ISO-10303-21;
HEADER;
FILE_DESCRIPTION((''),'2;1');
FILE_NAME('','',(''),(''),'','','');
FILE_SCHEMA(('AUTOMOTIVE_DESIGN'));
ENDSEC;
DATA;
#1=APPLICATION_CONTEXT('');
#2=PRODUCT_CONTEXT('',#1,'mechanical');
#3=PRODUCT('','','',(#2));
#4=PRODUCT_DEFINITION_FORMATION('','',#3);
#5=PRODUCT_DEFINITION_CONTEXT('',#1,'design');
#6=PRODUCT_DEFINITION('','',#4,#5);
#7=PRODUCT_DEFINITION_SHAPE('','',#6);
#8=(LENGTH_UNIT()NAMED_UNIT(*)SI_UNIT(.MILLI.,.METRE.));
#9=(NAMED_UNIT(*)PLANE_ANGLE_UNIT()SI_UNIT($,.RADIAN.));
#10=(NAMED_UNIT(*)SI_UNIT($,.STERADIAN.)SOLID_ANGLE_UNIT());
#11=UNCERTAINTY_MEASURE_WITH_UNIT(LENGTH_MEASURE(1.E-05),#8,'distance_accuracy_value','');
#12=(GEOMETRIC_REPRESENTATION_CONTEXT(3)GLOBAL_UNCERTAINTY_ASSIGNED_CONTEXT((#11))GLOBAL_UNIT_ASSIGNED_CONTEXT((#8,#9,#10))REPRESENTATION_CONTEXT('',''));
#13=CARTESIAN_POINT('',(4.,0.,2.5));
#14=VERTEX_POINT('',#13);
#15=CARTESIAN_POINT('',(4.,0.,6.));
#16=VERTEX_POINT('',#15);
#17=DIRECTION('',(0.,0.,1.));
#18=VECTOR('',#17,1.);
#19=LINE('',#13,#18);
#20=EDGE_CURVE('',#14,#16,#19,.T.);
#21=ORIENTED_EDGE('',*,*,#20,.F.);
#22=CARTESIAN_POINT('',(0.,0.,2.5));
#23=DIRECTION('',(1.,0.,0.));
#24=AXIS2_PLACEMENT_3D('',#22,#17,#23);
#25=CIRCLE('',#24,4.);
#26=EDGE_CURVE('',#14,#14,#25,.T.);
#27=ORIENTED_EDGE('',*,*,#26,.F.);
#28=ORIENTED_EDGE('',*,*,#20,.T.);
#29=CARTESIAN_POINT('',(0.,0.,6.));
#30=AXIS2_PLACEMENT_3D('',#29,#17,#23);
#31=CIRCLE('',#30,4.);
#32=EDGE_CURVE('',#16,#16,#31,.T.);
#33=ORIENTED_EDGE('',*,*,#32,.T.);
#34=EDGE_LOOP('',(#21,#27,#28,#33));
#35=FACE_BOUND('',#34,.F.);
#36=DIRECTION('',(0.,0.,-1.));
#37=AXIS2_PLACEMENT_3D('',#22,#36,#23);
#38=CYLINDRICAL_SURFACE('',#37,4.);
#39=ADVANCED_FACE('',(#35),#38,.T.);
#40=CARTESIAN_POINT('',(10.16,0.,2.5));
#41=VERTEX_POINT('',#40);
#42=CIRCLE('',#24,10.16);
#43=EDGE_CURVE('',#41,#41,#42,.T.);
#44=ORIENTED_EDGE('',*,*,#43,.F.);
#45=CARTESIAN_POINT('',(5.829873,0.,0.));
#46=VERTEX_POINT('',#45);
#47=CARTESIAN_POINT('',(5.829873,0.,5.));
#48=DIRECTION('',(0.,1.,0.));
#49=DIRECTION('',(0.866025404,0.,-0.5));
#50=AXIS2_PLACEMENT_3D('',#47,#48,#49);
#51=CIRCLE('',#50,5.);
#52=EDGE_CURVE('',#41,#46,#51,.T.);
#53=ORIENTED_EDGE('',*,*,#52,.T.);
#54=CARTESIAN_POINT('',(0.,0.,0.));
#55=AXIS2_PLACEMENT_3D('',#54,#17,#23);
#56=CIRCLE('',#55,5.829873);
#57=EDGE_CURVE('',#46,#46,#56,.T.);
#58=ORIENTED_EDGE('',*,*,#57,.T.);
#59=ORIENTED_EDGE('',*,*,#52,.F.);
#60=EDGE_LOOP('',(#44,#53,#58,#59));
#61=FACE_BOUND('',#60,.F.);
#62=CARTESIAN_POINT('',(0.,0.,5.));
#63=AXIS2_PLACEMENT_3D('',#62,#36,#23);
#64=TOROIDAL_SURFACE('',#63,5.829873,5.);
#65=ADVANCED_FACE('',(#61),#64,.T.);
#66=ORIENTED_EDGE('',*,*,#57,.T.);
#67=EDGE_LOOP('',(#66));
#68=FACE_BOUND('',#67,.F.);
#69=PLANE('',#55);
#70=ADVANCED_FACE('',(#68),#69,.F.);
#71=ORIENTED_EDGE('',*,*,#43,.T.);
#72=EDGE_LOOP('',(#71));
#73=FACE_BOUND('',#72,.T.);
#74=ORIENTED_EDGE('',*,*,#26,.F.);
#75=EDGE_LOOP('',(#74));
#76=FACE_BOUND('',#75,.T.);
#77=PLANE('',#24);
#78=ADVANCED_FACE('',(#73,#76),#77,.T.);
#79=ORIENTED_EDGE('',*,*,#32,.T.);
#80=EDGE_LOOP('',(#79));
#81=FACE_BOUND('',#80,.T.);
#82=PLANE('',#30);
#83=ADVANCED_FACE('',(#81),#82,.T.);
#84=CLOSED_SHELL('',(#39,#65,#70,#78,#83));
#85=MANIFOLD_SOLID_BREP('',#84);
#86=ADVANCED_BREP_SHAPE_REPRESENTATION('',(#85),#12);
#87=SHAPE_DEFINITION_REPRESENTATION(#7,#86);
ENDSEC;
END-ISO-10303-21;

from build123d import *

# Parameters (mm, degrees)
F0_R     = 10.16
F1_DEPTH = 2.5
F2_R     = 4
F3_DEPTH = 3.5


# Not quite as in the source:
# - a fillet or chamfer that OpenCascade refuses, or shapes differently, is made with other operations: its cross-section is extruded or revolved along the edge and cut away or added


with BuildPart() as f1:
    # F0 (on Top) → F1 (new body)
    with BuildSketch(Plane.XY):
        Circle(F0_R)
    extrude(amount=F1_DEPTH)

    # F2 (on face) → F3 (join)
    with BuildSketch(Plane.XY.offset(2.5)):
        Circle(F2_R)
    extrude(amount=F3_DEPTH)

    # F4: fillet of radius 5 on 1 edges, made by hand

    # F4_s1 → F4_t2 (revolve, cut)
    with BuildSketch(Plane.XZ):
        with BuildLine():
            ThreePointArc((10.16, 2.5), (8.3298729811, 0.6698729811), (5.8298729811, 0))
            Line((5.8298729811, 0), (10.16, 0))
            Line((10.16, 0), (10.16, 2.5))
        make_face()
    revolve(axis=Axis((0, 0, 0), (0, 0, 1)), mode=Mode.SUBTRACT)


solid = f1.part
